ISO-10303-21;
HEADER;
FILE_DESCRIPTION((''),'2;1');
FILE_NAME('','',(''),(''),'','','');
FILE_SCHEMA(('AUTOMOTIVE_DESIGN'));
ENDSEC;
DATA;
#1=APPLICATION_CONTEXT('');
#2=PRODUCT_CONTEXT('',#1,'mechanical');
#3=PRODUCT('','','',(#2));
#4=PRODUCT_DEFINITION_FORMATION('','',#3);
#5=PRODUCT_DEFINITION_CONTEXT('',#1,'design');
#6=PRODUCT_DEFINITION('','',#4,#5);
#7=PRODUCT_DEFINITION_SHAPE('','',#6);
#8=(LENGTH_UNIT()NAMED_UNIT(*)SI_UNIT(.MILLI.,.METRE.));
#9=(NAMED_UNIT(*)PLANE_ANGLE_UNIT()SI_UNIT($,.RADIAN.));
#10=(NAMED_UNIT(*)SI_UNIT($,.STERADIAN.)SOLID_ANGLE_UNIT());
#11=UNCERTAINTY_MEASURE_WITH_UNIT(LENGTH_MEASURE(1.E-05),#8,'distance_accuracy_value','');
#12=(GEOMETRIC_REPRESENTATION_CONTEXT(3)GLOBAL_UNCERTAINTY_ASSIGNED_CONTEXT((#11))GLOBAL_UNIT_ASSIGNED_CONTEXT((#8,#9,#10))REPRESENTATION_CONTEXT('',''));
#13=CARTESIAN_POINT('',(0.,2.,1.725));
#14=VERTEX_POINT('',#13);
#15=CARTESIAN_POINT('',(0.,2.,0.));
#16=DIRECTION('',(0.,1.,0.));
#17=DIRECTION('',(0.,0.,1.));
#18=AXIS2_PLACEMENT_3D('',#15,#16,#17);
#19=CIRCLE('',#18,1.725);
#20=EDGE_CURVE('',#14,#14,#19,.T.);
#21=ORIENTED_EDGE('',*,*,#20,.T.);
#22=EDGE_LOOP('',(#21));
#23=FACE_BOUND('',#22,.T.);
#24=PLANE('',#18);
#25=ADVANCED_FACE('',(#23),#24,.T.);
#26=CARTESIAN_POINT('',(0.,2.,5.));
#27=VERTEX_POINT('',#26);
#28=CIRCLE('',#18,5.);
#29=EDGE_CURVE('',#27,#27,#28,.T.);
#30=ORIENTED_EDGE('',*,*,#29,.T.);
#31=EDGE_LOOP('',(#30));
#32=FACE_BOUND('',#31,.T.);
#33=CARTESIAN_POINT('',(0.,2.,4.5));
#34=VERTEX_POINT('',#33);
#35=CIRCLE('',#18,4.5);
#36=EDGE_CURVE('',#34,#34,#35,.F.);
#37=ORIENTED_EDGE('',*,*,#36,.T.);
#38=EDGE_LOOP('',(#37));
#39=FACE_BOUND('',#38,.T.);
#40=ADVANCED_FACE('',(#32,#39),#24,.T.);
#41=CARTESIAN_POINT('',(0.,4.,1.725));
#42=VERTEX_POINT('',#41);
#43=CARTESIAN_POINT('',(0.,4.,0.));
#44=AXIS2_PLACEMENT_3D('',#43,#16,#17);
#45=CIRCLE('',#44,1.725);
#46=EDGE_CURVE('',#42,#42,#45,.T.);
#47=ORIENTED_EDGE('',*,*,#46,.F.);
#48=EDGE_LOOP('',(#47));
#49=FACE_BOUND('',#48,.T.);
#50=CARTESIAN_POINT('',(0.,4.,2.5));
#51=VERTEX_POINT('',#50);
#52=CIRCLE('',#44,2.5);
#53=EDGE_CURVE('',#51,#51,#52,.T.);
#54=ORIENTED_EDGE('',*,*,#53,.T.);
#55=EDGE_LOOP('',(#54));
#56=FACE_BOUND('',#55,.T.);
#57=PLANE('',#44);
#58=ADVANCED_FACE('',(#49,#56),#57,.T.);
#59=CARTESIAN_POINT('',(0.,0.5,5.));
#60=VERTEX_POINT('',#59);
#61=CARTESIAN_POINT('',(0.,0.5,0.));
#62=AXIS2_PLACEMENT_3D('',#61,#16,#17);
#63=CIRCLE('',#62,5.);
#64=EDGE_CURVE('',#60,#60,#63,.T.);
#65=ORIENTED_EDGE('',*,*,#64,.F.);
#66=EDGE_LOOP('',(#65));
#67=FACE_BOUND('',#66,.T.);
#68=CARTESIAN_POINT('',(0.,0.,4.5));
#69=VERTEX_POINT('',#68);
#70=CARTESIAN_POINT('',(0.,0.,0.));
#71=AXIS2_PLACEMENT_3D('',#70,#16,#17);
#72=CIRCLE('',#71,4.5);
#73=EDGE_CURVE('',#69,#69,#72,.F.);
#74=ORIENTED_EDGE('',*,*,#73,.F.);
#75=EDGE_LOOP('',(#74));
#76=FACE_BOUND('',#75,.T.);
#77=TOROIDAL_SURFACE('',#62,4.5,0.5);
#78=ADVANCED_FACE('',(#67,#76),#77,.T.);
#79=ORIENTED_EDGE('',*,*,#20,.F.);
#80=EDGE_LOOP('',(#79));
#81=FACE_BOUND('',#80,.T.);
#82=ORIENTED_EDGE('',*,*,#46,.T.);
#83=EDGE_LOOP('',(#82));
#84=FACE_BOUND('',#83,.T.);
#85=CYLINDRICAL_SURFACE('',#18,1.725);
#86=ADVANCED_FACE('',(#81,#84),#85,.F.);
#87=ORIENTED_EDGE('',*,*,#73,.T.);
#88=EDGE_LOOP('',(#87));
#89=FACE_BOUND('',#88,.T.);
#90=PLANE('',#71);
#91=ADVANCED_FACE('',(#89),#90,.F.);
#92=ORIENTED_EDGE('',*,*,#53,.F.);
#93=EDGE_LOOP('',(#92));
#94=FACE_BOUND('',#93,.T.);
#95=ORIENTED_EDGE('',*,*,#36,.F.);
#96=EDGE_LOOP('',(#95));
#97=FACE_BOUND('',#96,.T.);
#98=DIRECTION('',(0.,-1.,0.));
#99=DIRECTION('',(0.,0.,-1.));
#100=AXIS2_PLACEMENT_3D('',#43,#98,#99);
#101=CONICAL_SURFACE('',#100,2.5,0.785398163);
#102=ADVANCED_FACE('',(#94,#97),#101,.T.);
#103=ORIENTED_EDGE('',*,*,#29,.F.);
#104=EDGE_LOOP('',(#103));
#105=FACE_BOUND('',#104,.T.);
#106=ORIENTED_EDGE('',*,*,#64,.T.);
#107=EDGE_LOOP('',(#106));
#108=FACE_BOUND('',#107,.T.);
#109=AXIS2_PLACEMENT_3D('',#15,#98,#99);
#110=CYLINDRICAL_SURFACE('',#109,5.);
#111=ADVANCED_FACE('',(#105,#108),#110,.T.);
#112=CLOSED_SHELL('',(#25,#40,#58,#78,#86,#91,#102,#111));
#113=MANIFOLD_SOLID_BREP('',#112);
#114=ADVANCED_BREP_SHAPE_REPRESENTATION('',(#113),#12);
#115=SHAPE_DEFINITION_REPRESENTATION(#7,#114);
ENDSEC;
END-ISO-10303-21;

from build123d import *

# Parameters (mm, degrees)
ESBO_O1_R                = 5
RESSALTO_EXTRUS_O1_DEPTH = 2
ESBO_O2_R                = 2.5
RESSALTO_EXTRUS_O2_DEPTH = 2
ESBO_O3_R                = 1.725
CORTE_EXTRUS_O1_DEPTH    = 2
CHANFRO1_SIZE            = 2
FILETE1_R                = 0.5


with BuildPart() as part:
    # Esboço1 → Ressalto-extrusão1 (new body)
    with BuildSketch(Plane(origin=(0, 0, 0), x_dir=(1, 0, 0), z_dir=(0, 1, 0))):
        with Locations(Location((0, 0, 0), (0, 0, 270))):
            Circle(ESBO_O1_R)
    extrude(amount=RESSALTO_EXTRUS_O1_DEPTH)

    # Esboço2 → Ressalto-extrusão2 (add)
    with BuildSketch(Plane(origin=(0, 2, 0), x_dir=(1, 0, 0), z_dir=(0, 1, 0))):
        with Locations(Location((0, 0, 0), (0, 0, 270))):
            Circle(ESBO_O2_R)
    extrude(amount=RESSALTO_EXTRUS_O2_DEPTH)

    # Esboço3 → Corte-extrusão1 (cut)
    with BuildSketch(Plane(origin=(0, 4, 0), x_dir=(1, 0, 0), z_dir=(0, 1, 0))):
        with Locations(Location((0, 0, 0), (0, 0, 270))):
            Circle(ESBO_O3_R)
    extrude(amount=-CORTE_EXTRUS_O1_DEPTH, mode=Mode.SUBTRACT)

    # Chanfro1
    chanfro1_edges = [part.edges().sort_by_distance(p)[0] for p in [
        (0, 2, -2.5),
    ]]
    chamfer(chanfro1_edges, length=CHANFRO1_SIZE - 0.0001)  # a hair under: the kernel refuses the full size

    # Filete1
    filete1_edges = [part.edges().sort_by_distance(p)[0] for p in [
        (0, 0, -5),
    ]]
    fillet(filete1_edges, radius=FILETE1_R)


solid = part.part
